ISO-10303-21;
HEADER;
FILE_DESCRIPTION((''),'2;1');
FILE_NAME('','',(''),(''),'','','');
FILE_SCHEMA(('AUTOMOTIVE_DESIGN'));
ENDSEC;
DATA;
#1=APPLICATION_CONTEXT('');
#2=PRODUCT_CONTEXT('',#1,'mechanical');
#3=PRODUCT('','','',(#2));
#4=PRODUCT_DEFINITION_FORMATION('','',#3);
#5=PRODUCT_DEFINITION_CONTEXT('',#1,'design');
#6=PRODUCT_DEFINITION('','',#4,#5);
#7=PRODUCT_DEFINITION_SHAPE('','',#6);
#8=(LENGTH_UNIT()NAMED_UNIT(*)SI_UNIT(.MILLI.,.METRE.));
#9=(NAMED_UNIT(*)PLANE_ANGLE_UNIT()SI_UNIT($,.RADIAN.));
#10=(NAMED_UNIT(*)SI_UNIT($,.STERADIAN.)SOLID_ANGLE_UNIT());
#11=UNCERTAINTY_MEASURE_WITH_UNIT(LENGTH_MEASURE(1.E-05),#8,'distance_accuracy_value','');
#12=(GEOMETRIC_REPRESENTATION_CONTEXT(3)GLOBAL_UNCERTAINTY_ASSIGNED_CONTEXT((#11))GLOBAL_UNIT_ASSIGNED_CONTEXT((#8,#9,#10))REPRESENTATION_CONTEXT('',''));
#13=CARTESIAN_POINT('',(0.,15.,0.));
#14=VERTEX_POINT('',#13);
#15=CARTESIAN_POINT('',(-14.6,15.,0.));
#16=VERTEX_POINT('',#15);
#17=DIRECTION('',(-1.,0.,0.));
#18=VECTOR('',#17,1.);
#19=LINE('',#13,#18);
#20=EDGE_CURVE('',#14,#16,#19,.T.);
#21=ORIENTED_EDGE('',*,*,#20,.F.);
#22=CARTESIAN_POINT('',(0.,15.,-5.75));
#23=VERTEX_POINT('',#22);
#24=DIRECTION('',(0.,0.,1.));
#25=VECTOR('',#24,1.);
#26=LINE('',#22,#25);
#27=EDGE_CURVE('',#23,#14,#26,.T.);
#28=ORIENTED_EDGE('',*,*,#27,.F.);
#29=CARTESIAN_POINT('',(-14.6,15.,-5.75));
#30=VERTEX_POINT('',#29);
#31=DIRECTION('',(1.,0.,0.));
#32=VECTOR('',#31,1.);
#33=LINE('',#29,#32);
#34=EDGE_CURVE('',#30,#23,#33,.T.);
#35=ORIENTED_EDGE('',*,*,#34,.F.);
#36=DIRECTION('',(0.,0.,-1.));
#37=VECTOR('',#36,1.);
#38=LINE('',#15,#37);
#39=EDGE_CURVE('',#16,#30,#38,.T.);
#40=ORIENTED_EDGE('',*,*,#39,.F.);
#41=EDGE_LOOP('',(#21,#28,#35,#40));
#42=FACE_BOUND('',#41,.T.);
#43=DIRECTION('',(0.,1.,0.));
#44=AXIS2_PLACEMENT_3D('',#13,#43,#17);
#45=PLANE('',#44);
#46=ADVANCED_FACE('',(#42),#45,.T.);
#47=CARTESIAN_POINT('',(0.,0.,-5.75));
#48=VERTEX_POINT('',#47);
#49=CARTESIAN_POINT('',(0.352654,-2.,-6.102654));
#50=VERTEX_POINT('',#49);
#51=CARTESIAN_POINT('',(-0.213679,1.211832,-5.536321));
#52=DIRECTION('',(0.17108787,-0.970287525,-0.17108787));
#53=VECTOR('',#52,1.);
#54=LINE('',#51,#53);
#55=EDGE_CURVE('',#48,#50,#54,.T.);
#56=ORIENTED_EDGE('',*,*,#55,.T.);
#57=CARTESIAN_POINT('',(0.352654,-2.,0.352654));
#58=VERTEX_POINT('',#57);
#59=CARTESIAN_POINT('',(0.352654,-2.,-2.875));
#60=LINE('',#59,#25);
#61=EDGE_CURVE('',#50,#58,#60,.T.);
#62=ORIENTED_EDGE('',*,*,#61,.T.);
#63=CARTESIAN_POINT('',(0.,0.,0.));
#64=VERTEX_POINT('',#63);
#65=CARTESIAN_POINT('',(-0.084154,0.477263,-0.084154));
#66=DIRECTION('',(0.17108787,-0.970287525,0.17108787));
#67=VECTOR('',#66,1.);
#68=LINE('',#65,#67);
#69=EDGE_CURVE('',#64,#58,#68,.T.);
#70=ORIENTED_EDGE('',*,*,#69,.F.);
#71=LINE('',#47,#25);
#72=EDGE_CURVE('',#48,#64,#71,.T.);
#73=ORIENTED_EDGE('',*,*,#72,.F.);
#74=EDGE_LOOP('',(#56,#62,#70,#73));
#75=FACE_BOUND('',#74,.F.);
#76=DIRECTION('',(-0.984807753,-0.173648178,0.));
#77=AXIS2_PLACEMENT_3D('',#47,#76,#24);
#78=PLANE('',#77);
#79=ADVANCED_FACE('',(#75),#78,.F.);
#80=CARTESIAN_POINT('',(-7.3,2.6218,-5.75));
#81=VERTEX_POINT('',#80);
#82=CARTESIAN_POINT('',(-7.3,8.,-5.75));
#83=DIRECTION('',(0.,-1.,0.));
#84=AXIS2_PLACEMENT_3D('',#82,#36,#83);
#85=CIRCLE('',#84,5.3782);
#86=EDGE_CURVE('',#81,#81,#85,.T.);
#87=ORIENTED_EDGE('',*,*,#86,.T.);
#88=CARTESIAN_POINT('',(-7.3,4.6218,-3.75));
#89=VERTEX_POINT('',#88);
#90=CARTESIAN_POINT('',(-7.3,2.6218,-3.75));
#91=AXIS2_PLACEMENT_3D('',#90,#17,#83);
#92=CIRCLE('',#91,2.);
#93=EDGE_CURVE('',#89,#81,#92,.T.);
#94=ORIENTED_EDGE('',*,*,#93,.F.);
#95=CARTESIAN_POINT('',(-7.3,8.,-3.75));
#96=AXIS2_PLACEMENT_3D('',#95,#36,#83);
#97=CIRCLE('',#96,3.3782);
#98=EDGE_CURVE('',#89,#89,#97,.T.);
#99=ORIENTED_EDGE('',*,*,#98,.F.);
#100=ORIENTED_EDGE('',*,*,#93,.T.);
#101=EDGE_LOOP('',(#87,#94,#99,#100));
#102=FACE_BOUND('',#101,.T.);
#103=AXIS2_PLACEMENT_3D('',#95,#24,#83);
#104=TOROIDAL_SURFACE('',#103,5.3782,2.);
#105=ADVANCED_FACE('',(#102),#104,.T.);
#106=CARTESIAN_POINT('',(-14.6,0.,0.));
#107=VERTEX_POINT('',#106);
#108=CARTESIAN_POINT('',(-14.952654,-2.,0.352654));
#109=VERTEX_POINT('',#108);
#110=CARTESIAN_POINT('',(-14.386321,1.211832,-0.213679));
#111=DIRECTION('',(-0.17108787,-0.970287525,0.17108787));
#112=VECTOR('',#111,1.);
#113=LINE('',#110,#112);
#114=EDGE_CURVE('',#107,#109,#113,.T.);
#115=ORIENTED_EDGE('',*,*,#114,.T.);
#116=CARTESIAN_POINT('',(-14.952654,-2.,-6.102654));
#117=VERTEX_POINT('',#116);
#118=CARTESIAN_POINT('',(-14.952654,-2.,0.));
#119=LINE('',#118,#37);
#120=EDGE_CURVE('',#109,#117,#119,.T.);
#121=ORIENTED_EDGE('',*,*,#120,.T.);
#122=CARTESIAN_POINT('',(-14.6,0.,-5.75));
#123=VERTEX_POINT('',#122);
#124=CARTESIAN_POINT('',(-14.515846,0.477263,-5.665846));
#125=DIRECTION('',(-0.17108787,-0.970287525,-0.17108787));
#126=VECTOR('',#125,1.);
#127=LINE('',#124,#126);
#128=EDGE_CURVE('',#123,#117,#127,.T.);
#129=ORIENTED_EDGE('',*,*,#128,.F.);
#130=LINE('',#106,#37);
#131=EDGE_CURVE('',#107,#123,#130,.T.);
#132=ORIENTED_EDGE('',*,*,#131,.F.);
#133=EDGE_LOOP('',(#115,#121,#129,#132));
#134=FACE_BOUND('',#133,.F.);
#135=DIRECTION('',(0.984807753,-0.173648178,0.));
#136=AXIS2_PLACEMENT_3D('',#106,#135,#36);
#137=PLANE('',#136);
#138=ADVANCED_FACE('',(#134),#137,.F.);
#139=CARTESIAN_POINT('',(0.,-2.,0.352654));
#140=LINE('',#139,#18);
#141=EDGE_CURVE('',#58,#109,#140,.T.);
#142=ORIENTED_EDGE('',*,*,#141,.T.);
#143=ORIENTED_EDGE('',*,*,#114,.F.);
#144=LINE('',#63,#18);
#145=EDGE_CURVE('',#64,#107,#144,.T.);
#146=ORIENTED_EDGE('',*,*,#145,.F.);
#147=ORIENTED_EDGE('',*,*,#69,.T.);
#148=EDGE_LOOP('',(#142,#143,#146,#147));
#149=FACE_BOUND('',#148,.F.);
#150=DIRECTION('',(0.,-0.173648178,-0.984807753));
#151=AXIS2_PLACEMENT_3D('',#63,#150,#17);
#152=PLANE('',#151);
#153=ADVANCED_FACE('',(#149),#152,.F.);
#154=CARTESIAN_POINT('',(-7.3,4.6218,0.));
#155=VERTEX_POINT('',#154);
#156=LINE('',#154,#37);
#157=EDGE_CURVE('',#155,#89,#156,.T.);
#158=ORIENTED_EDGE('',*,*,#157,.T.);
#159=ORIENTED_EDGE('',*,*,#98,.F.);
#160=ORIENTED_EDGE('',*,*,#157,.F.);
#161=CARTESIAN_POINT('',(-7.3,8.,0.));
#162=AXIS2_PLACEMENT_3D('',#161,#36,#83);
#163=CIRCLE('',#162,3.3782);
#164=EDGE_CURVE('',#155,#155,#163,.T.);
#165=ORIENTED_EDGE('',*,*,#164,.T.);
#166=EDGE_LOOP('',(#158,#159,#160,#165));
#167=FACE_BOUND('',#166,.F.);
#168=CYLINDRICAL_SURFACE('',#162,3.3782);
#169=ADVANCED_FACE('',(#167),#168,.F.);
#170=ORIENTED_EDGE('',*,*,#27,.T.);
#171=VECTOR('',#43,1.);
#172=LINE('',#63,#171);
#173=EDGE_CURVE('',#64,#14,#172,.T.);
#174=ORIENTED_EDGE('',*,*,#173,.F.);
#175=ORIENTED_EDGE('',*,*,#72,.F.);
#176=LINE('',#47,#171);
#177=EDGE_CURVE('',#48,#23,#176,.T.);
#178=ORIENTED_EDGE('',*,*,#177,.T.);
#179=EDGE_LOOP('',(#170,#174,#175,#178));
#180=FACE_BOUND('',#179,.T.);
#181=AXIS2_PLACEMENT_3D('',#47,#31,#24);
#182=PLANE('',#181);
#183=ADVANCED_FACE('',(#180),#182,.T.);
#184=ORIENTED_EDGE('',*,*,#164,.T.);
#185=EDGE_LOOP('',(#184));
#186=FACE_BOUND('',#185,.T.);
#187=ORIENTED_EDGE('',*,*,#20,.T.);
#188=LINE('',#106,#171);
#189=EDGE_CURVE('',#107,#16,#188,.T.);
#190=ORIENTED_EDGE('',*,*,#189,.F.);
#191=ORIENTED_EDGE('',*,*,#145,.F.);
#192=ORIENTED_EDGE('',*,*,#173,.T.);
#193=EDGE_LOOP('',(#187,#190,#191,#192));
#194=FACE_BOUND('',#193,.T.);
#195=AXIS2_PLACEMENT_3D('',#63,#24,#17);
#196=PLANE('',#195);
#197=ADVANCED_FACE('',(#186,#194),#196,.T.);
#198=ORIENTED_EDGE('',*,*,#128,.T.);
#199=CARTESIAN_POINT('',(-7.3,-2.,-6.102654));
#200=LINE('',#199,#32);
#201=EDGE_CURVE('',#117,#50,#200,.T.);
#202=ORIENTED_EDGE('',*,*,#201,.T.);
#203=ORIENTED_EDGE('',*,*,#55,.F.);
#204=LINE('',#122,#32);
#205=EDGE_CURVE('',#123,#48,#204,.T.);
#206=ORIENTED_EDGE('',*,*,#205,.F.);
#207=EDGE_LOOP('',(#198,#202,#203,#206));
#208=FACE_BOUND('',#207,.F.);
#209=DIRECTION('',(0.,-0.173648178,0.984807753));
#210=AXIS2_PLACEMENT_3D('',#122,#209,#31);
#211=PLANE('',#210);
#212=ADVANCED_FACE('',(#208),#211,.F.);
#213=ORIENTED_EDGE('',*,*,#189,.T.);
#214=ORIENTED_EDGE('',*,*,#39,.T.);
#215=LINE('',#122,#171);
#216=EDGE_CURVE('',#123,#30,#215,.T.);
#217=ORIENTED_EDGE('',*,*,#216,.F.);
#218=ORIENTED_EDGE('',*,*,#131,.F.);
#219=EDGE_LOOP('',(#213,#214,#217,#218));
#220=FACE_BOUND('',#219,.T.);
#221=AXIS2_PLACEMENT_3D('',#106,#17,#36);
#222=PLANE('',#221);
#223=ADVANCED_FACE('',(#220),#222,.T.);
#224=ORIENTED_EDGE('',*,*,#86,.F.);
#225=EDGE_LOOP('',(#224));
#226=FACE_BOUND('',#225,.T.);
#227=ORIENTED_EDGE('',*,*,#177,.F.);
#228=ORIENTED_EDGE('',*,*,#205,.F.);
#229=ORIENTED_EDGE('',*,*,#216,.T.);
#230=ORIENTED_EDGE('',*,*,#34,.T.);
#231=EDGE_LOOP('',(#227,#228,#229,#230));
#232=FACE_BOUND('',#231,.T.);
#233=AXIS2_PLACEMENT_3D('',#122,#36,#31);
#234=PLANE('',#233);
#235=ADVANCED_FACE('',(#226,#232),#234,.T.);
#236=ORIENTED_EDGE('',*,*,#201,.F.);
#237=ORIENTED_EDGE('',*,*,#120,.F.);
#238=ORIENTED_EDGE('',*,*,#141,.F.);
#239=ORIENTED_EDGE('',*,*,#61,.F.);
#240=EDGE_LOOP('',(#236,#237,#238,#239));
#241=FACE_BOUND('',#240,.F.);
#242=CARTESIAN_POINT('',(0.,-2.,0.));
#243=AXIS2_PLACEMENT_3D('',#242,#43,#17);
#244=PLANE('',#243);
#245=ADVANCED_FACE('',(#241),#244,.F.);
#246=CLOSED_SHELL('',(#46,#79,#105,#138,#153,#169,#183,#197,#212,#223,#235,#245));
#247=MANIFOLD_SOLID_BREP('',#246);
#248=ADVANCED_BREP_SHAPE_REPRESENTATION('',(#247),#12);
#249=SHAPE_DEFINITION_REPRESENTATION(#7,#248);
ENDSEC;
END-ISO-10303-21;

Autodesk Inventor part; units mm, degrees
ref_plane "YZ Plane" through (0, 0, 0) normal (1, 0, 0) x (0, 1, 0)
ref_plane "XZ Plane" through (0, 0, 0) normal (0, 1, 0) x (-1, 0, 0)
ref_plane "XY Plane" through (0, 0, 0) normal (0, 0, 1) x (1, 0, 0)
sketch "Sketch1" plane through (0, 0, 0) normal (0, 1, 0) x (-1, 0, 0)
  point P0 (0, 0)
sketch "Sketch2" plane through (0, 0, 0) normal (0, 1, 0) x (-1, 0, 0)
  line L0 (0, 0) -> (14.6, 0)
  line L1 (14.6, 0) -> (14.6, -5.75)
  line L2 (14.6, -5.75) -> (0, -5.75)
  line L3 (0, -5.75) -> (0, 0)
  dimension "d0" = 14.6
  dimension "d1" = 5.75
extrude "Extrusion1" add sketch "Sketch2" along normal blind 15 and the other way blind 2 draft 10
sketch "Sketch3" plane through (-14.6, 0, 0) normal (0, 0, 1) x (1, 0, 0)
  line L0 (0, 15) -> (14.6, 15) projected
  point P0 (14.6, 0)
  point P1 (7.3, 8)
  point P2 (7.3, 15)
  dimension "d6" = 7
hole "Hole1" at (-7.3, 8, 0) direction (0, 0, -1) diameter 6.7564 depth 12.7 tip angle 118 clearance for "Flat Head Machine Screw (82)" size "1/4" standard "Ansi Unified Screw Threads"
fillet "Fillet1" radius 2 1 edges at (-7.3, 11.3782, -5.75)
properties part number "Support Hole"
